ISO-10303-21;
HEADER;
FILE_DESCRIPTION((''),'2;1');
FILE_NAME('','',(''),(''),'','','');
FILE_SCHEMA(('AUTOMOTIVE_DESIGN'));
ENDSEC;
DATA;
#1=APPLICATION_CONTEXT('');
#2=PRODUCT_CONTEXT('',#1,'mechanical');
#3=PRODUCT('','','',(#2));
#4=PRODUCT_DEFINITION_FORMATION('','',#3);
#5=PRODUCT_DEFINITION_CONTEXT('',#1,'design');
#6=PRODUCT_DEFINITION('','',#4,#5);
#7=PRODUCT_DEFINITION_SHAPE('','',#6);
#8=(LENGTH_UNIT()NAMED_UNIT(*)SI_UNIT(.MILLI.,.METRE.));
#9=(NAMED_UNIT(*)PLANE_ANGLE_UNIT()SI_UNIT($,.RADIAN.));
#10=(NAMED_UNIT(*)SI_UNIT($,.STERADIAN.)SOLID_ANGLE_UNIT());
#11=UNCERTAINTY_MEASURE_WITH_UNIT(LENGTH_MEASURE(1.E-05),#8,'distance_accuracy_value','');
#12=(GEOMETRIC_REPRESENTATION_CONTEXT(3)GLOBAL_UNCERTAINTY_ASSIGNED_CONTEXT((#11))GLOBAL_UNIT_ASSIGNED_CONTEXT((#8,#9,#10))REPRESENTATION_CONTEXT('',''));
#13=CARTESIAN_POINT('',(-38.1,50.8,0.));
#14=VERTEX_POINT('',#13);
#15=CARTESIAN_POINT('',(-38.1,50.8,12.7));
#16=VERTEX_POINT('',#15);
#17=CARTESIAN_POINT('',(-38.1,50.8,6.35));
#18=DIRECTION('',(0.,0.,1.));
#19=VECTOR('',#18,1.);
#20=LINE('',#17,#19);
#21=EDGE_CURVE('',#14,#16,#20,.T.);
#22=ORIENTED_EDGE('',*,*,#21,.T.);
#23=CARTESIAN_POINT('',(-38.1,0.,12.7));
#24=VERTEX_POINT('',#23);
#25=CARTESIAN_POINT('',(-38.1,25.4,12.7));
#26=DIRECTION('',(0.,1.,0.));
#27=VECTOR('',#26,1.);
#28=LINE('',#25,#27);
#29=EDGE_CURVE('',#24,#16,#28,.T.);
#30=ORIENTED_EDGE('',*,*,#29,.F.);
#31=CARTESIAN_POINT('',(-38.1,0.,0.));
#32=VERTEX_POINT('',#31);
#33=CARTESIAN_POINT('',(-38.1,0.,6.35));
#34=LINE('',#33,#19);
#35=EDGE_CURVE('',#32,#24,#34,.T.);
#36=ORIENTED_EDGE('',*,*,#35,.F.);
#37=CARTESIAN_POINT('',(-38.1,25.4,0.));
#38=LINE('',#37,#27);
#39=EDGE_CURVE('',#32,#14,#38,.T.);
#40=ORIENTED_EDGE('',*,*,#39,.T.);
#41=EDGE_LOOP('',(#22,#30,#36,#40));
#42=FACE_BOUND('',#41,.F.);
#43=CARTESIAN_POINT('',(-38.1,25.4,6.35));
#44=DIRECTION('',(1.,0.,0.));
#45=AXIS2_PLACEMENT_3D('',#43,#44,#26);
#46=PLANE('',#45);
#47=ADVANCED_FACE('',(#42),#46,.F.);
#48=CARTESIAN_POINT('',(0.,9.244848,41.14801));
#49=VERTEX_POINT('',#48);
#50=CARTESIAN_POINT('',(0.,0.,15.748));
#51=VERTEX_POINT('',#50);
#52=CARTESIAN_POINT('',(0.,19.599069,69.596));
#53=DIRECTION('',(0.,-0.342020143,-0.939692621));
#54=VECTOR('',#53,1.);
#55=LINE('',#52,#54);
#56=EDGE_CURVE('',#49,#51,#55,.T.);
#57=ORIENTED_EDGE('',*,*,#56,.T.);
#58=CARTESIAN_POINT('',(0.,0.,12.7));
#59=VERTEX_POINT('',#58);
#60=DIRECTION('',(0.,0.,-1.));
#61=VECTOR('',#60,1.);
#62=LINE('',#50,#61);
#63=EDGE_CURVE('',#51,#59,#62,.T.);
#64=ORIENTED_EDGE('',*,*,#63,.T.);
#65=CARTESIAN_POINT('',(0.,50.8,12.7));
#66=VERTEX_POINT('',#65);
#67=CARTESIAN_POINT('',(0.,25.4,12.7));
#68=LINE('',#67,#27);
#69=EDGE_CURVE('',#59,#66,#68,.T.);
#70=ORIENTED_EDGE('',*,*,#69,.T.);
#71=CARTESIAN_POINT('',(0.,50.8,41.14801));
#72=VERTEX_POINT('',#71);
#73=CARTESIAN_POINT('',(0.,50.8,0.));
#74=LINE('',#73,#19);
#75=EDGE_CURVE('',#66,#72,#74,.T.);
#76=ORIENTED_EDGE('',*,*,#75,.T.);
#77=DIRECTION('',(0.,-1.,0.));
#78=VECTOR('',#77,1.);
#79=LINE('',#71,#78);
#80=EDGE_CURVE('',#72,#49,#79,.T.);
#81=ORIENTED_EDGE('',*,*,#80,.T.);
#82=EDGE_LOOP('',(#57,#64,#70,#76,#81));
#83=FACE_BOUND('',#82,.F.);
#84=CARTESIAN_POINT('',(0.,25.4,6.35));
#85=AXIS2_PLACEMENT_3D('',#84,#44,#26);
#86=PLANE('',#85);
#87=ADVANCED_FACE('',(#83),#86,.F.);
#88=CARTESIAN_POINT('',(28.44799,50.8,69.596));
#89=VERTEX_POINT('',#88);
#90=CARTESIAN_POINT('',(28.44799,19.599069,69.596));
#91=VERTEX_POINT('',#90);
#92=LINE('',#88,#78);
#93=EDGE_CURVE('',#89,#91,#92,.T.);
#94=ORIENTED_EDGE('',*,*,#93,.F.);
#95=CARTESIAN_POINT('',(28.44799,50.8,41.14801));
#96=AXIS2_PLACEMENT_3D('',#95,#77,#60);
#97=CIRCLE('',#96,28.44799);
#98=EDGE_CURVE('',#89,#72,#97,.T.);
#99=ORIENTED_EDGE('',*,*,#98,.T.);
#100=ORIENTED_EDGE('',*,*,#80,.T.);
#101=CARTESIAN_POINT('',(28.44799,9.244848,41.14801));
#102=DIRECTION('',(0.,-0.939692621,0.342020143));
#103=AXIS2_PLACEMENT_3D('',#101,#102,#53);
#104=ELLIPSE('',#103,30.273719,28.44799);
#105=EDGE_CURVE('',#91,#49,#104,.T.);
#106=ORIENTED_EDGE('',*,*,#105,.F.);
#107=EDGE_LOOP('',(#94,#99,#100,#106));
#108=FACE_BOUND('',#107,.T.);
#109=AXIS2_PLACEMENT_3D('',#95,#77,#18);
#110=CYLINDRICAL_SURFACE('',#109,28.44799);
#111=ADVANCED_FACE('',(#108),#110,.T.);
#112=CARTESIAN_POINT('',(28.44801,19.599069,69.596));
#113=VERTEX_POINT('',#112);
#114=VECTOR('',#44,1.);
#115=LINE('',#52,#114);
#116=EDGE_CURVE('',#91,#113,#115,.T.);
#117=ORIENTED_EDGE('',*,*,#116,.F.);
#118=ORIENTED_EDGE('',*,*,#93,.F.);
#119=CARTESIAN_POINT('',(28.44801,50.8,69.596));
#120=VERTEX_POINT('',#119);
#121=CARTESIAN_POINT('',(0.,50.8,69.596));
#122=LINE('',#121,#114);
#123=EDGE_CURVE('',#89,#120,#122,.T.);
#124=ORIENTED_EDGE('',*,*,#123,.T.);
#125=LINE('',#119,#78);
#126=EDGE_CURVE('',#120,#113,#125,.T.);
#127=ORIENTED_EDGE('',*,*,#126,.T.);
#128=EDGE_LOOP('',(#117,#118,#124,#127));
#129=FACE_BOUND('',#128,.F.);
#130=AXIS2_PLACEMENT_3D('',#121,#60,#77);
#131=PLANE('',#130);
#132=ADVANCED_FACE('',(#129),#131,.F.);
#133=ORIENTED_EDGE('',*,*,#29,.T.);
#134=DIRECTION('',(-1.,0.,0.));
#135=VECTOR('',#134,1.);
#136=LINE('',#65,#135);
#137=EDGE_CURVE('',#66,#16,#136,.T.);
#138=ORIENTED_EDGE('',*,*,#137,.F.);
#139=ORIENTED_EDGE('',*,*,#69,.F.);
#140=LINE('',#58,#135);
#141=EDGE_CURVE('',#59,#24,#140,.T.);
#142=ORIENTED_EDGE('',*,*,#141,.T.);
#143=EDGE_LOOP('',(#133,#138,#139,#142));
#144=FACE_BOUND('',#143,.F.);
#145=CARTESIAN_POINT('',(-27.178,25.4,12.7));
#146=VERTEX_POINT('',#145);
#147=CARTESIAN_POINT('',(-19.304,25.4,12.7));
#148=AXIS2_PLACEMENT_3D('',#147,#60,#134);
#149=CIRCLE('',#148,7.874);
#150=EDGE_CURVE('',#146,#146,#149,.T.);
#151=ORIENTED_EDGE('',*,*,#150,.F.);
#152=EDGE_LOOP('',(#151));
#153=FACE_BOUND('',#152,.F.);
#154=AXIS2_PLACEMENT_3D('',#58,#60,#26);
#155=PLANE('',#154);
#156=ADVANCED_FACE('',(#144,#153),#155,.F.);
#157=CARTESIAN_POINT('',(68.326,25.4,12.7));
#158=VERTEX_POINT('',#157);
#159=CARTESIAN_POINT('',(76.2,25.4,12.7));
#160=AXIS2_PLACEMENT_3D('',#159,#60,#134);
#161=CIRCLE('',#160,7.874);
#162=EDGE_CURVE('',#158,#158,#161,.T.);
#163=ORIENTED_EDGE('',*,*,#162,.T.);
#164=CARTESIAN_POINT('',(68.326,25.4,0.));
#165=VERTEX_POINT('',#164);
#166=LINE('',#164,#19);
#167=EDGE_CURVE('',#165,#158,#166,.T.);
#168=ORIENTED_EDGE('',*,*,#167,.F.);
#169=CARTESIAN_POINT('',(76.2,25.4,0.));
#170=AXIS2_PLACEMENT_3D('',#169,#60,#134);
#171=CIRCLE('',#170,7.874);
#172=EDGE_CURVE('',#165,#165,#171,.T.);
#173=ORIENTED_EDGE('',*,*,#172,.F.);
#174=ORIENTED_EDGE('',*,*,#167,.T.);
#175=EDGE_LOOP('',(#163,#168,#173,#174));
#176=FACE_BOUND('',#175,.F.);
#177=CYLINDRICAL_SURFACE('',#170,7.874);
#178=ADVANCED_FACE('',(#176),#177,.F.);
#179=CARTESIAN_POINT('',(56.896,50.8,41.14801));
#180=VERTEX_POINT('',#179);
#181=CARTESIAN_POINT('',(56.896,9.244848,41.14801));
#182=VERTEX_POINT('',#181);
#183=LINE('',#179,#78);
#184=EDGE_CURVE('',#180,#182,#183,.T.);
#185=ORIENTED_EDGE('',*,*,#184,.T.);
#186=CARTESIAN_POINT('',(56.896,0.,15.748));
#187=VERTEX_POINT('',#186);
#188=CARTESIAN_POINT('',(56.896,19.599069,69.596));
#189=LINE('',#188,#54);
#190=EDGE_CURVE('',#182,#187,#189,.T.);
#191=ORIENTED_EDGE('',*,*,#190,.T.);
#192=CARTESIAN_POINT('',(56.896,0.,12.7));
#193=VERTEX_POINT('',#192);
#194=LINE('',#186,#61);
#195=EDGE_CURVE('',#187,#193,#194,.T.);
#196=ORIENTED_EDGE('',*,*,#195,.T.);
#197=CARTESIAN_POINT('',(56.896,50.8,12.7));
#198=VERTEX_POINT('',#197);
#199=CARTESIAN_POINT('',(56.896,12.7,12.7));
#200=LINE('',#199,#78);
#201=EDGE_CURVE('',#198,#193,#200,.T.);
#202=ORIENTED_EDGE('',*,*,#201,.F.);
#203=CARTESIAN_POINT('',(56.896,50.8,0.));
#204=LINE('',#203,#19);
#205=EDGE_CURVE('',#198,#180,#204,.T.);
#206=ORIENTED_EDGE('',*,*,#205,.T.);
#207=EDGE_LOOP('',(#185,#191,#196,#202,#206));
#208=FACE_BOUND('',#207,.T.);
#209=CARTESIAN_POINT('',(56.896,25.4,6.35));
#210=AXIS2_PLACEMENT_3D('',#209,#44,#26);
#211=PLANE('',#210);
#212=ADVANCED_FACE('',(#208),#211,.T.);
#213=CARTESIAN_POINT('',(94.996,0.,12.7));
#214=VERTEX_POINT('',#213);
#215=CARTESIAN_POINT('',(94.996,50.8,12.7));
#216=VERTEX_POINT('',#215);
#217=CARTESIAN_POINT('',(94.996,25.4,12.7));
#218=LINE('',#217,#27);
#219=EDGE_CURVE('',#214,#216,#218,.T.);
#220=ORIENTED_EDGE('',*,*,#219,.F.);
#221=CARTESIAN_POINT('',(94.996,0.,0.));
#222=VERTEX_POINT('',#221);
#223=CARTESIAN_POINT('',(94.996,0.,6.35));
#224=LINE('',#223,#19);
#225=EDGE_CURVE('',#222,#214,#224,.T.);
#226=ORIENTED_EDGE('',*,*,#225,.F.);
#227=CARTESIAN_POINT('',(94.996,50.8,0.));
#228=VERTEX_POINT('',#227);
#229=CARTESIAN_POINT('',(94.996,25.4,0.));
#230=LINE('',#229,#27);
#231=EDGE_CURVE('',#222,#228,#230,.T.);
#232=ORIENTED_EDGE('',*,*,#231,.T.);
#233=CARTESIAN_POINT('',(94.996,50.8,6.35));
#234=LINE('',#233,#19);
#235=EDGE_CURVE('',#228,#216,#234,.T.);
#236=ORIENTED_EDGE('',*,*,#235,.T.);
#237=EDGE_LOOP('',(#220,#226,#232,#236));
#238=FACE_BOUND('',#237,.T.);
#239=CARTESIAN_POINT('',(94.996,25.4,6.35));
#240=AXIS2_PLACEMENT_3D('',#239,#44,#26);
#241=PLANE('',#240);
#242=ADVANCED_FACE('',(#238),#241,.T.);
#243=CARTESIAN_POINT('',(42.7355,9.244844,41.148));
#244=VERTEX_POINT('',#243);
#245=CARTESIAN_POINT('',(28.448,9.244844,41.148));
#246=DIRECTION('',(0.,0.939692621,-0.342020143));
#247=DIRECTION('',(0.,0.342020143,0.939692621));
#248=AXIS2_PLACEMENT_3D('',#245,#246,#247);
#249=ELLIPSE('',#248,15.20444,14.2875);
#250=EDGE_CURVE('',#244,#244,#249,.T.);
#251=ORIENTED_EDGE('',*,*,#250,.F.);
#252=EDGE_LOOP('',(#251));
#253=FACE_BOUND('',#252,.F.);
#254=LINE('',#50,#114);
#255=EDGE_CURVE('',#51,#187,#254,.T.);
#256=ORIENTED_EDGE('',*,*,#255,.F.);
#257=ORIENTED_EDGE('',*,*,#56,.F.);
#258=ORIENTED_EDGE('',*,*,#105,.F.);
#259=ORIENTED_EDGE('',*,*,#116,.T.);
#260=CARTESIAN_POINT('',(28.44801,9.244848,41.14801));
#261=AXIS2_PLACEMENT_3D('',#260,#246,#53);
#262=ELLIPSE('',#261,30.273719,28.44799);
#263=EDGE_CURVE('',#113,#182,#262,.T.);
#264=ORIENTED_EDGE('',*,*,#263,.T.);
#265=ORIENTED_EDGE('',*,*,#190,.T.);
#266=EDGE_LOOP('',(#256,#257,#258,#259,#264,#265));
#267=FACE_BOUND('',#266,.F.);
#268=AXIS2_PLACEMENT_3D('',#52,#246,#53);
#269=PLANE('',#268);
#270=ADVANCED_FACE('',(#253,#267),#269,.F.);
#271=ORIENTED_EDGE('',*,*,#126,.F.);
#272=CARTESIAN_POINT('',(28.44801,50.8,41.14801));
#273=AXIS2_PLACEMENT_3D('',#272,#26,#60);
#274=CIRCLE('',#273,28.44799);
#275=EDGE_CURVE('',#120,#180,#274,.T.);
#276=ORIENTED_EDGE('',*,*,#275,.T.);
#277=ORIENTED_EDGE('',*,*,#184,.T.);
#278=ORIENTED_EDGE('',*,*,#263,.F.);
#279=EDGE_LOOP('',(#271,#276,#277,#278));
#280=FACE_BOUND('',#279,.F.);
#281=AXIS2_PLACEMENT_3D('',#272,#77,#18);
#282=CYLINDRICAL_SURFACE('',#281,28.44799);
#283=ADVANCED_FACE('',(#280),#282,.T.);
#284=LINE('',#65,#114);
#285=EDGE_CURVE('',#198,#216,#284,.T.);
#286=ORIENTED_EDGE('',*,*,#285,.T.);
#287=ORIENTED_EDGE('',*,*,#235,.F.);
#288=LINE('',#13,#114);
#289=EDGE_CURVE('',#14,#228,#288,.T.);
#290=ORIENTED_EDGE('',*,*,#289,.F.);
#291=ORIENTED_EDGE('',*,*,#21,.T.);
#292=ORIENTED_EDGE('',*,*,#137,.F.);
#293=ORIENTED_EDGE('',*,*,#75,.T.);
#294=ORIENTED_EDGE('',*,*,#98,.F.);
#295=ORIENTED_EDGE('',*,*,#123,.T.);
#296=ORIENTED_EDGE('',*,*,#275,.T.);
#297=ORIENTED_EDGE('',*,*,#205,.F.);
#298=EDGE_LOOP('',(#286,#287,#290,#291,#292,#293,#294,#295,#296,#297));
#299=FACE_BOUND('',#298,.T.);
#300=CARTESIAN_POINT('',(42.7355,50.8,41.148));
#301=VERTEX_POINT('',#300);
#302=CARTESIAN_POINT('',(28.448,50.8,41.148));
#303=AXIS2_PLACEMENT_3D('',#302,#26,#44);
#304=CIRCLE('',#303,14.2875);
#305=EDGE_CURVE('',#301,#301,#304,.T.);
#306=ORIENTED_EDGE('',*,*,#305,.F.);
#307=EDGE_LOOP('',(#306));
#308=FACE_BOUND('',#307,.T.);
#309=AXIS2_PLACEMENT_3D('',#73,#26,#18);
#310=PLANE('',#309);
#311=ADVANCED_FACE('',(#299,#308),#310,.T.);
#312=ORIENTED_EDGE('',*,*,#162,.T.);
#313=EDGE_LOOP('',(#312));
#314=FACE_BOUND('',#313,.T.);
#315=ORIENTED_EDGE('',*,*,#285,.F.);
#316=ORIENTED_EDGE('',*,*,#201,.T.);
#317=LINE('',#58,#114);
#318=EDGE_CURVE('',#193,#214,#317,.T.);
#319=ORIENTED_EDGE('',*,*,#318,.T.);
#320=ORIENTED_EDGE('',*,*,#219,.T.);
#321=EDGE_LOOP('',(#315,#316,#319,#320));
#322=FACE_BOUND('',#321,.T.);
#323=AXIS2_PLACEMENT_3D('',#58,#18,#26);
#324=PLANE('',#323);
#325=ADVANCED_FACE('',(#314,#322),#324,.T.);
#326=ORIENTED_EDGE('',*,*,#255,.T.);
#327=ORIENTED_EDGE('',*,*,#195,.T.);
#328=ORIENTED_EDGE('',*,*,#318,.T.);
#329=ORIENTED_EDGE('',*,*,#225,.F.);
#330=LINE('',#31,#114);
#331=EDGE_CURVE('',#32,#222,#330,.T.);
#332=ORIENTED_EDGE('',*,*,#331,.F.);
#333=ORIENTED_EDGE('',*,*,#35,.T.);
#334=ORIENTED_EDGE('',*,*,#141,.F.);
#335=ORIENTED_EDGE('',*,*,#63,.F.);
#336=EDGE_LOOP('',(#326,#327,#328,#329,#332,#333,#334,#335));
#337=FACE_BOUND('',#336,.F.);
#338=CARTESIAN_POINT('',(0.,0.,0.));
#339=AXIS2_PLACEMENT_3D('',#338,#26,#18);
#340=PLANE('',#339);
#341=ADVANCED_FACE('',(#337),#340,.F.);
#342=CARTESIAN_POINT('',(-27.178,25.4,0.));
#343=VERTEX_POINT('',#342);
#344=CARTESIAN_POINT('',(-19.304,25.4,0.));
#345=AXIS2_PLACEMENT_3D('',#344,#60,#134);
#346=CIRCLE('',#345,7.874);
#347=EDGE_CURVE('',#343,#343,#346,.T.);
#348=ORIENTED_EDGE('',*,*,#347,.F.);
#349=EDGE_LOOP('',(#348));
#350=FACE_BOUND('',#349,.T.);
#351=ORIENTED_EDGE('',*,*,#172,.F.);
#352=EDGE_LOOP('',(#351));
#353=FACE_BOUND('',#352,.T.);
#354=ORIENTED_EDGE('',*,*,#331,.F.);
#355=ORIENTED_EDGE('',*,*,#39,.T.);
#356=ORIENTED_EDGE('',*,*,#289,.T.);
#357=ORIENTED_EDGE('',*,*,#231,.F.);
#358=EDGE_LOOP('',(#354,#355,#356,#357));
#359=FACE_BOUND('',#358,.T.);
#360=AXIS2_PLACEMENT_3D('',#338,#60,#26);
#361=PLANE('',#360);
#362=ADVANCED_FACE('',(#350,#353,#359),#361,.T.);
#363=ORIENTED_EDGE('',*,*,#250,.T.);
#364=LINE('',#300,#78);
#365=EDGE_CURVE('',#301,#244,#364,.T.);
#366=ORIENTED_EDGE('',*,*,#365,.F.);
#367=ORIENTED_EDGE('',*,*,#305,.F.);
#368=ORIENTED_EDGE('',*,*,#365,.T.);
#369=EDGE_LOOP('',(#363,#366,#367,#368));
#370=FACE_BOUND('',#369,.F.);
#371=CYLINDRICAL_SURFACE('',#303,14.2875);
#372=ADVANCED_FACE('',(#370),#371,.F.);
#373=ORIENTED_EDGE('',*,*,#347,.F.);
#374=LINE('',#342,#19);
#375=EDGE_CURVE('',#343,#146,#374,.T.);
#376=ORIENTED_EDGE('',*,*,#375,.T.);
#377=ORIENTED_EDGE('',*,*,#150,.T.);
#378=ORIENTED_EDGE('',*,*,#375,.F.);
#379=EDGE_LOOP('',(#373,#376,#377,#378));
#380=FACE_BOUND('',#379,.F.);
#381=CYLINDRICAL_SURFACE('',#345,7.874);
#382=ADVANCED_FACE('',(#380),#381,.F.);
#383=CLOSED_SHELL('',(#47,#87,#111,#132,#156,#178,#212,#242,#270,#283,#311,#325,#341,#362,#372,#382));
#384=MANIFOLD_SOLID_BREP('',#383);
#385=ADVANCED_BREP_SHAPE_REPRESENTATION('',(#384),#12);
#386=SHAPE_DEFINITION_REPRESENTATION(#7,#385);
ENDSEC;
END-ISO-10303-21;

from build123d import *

# Parameters (mm, degrees)
F0_W     = 50.8
F0_H     = 12.7
F0_H_2   = 3.048
F1_DEPTH = 56.896
F2_DEPTH = 94.996
F3_DEPTH = 38.1
F4_R     = 28.44799
F6_DEPTH = 51.054
F8_DEPTH = 42.418


# Not quite as in the source:
# - a fillet or chamfer is up to 0.001 mm smaller than in the source, because OpenCascade refuses the exact size


with BuildPart() as f1:
    # F0 (on Right) → F1 (new body)
    with BuildSketch(Plane.YZ):
        with Locations((25.4, 6.35)):
            Rectangle(F0_W, F0_H)
        Polygon((19.5990691748, 69.596), (0, 15.748), (50.8, 15.748), (50.8, 69.596), align=None)
        with Locations((25.4, 14.224)):
            Rectangle(F0_W, F0_H_2)
    extrude(amount=F1_DEPTH)

    # F0 (on Right) → F2 (join)
    with BuildSketch(Plane.YZ):
        with Locations((25.4, 6.35)):
            Rectangle(F0_W, F0_H)
    extrude(amount=F2_DEPTH)

    # F0 (on Right) → F3 (join)
    with BuildSketch(Plane.YZ):
        with Locations((25.4, 6.35)):
            Rectangle(F0_W, F0_H)
    extrude(amount=-F3_DEPTH)

    # F4 (radius 28.448 in the source; OpenCascade refuses exactly that, so slightly less here)
    f4_edges = [f1.edges().sort_by_distance(p)[0] for p in [
        (0, 35.199535, 69.596),
        (56.896, 35.199535, 69.596),
    ]]
    fillet(f4_edges, radius=F4_R)

    # F5 (on face) → F6 (cut)
    with BuildSketch(Plane(origin=(0, 50.8, 0), x_dir=(-1, 0, 0), z_dir=(0, 1, 0))):
        with BuildLine():
            ThreePointArc((-14.1605, 41.148), (-28.448, 55.4355), (-42.7355, 41.148))
            Line((-42.7355, 41.148), (-14.1605, 41.148))
        make_face()
        with BuildLine():
            Line((-14.1605, 41.148), (-42.7355, 41.148))
            ThreePointArc((-42.7355, 41.148), (-28.448, 26.8605), (-14.1605, 41.148))
        make_face()
    extrude(amount=-F6_DEPTH, mode=Mode.SUBTRACT)

    # F7 (on face) → F8 (cut)
    with BuildSketch(Plane(origin=(0, 0, 0), x_dir=(1, 0, 0), z_dir=(0, 0, -1))):
        with BuildLine():
            ThreePointArc((-11.43, -25.4), (-19.304, -17.526), (-27.178, -25.4))
            Line((-27.178, -25.4), (-19.304, -25.4))
            Line((-19.304, -25.4), (-11.43, -25.4))
        make_face()
        with BuildLine():
            ThreePointArc((84.074, -25.4), (76.2, -17.526), (68.326, -25.4))
            Line((68.326, -25.4), (76.2, -25.4))
            Line((76.2, -25.4), (84.074, -25.4))
        make_face()
        with BuildLine():
            Line((76.2, -25.4), (68.326, -25.4))
            ThreePointArc((68.326, -25.4), (76.2, -33.274), (84.074, -25.4))
            Line((84.074, -25.4), (76.2, -25.4))
        make_face()
        with BuildLine():
            Line((-19.304, -25.4), (-27.178, -25.4))
            ThreePointArc((-27.178, -25.4), (-19.304, -33.274), (-11.43, -25.4))
            Line((-11.43, -25.4), (-19.304, -25.4))
        make_face()
    extrude(amount=-F8_DEPTH, mode=Mode.SUBTRACT)


solid = f1.part
